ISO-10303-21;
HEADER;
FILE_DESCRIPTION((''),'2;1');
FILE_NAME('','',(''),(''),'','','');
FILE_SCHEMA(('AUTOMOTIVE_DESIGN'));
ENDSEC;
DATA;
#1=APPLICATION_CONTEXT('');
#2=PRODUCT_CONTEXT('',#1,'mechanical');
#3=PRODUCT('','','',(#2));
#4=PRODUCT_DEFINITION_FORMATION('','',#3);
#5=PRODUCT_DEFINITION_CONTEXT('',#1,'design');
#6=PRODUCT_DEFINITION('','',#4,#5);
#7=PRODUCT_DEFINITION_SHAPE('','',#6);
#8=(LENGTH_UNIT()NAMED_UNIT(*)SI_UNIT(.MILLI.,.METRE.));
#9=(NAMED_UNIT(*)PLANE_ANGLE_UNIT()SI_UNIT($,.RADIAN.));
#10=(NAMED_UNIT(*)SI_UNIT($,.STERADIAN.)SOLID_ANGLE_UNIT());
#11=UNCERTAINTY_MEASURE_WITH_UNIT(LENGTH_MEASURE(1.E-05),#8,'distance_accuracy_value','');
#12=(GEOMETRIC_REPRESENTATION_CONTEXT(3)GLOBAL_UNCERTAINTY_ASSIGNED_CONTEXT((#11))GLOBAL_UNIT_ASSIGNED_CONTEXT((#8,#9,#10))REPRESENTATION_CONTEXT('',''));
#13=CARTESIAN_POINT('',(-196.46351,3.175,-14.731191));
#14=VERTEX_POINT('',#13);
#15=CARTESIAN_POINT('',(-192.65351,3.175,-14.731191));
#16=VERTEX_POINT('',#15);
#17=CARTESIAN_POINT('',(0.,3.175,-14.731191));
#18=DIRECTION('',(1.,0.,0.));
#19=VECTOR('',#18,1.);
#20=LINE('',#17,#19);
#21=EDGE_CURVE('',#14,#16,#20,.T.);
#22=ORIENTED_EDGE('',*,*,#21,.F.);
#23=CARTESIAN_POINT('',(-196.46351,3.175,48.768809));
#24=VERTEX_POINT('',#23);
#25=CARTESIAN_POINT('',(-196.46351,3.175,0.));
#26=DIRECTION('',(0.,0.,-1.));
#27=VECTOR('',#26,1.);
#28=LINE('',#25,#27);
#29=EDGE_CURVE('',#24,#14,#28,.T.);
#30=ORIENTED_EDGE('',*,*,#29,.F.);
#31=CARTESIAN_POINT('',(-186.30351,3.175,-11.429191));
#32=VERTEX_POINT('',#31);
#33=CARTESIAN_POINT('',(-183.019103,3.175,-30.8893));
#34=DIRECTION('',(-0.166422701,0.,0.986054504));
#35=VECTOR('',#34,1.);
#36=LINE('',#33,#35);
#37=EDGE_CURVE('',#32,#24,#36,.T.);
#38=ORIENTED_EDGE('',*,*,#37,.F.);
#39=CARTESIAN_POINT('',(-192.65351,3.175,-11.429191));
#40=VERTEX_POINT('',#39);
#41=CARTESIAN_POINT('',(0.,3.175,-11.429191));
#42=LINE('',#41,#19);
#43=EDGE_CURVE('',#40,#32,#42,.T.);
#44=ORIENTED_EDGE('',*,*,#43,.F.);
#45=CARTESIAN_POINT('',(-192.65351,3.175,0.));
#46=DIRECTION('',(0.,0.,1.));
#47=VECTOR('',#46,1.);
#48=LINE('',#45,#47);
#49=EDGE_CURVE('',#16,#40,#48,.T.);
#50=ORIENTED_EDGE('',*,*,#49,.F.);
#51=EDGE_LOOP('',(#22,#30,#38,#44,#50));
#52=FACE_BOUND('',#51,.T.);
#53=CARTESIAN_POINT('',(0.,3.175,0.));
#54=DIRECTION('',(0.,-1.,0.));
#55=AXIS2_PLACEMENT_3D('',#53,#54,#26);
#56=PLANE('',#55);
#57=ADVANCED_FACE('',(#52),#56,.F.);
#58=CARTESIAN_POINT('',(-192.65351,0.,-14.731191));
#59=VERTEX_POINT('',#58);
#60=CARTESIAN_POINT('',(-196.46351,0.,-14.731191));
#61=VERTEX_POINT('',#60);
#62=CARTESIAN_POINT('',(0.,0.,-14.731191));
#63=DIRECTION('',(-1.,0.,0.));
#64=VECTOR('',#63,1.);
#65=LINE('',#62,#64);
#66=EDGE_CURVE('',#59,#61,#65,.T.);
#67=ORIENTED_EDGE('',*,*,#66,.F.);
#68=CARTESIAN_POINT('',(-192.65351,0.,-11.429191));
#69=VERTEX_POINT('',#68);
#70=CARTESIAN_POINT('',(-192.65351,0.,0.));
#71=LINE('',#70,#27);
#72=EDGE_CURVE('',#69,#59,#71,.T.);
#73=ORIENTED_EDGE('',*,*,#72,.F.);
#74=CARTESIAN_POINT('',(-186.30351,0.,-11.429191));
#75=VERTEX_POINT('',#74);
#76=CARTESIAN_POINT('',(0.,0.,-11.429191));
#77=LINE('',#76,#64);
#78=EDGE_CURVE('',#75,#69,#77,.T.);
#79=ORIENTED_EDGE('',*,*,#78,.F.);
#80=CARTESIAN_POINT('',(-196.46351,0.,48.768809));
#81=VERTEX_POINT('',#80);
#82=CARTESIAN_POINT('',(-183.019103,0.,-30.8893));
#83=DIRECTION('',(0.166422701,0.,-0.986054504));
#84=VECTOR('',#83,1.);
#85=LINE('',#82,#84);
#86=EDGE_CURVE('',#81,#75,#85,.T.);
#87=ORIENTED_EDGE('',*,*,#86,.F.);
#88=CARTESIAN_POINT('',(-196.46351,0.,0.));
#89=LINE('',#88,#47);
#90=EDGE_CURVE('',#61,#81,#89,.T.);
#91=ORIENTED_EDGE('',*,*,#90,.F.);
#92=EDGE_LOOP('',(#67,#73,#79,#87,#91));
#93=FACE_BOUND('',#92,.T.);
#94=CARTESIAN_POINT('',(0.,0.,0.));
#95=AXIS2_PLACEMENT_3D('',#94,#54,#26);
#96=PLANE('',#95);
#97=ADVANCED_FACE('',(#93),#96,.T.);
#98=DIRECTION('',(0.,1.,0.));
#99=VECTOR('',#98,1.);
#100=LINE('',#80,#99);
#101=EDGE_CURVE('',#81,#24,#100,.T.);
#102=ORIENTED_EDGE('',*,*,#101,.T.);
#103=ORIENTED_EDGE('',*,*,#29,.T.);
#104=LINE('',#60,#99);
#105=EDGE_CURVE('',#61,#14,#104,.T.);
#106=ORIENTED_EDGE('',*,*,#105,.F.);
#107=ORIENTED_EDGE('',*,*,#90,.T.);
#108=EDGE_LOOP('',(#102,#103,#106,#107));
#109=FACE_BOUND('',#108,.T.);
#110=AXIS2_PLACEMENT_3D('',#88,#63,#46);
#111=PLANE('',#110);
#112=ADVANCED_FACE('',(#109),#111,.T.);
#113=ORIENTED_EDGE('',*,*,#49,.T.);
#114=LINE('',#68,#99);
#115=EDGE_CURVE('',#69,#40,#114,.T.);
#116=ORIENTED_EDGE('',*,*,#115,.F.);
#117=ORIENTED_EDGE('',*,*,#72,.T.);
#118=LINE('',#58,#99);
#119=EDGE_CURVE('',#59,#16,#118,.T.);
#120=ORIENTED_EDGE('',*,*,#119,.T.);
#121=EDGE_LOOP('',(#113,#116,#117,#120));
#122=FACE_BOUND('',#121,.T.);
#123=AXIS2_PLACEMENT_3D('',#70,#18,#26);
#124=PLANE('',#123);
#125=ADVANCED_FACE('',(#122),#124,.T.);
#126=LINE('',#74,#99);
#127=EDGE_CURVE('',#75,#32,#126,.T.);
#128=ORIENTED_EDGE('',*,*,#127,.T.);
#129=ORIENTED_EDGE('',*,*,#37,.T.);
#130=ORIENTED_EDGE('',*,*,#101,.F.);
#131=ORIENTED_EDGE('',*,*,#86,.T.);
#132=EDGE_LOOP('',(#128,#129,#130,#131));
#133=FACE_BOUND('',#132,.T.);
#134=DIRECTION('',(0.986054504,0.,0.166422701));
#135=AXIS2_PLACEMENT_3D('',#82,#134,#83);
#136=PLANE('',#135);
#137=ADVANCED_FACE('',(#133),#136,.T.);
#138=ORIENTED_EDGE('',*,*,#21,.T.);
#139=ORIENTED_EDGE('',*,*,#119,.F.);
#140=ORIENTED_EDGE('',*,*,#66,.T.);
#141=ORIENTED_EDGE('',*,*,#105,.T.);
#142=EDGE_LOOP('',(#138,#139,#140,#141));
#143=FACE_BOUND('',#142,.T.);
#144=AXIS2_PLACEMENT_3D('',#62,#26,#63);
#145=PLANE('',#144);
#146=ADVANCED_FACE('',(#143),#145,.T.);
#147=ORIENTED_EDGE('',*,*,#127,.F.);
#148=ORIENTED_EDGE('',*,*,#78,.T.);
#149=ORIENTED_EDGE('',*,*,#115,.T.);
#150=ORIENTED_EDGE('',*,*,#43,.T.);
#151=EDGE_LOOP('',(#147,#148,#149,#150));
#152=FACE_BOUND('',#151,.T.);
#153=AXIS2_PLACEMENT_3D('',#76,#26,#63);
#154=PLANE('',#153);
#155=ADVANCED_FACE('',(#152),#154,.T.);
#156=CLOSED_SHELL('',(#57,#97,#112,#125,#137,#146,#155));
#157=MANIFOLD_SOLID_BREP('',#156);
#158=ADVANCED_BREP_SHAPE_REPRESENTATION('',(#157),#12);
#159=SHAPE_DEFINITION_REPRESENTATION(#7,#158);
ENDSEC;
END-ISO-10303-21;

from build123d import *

# Parameters (mm, degrees)
SKETCH2_W                      = 304.8
SKETCH2_H                      = 304.8
BOSS_EXTRUDE1_DEPTH            = 3.175
CUT_EXTRUDE1_DEPTH             = 348.408852067
CUT_EXTRUDE1_DEPTH_BACK        = 348.408852067
SKETCH3_W                      = 304.8
SKETCH3_H                      = 304.8
SKETCH3_R                      = 12.7
SKETCH3_R_2                    = 8.89
BODY_DELETE_KEEP_1_OUTLINE_R   = 8.89
BODY_DELETE_KEEP_1_OUTLINE_R_2 = 12.7
BODY_DELETE_KEEP_1_DEPTH       = 3.175


# Read off the part's stored shape, not the designer's step: Body-Delete/Keep 1
with BuildPart() as part:
    # Sketch2 → Boss-Extrude1 (new body)
    with BuildSketch(Plane(origin=(0, 0, 0), x_dir=(1, 0, 0), z_dir=(0, 1, 0))):
        with Locations((-56.763509666, -124.968808797)):
            Rectangle(SKETCH2_W, SKETCH2_H)
    extrude(amount=BOSS_EXTRUDE1_DEPTH)

    # Sketch3 → Cut-Extrude1 (cut, two sides: drawn at the far end of the back side and taken through both)
    # profile 1 of 3: a face of its own
    with BuildSketch(Plane(origin=(0, 3.175, 0), x_dir=(1, 0, 0), z_dir=(0, 1, 0)).offset(-CUT_EXTRUDE1_DEPTH_BACK)):
        with Locations((-56.763509666, -124.968808797)):
            Rectangle(SKETCH3_W, SKETCH3_H)
        Polygon((-188.253637726, -268.695366412), (-192.063637726, -268.695366412), (-192.063637726, -265.393366412), (-198.413637726, -265.393366412), (-188.253637726, -205.195366412), align=None, mode=Mode.SUBTRACT)
        Polygon((-185.713637726, -265.393366412), (-175.553637726, -205.195366412), (-175.553637726, -268.695366412), (-179.363637726, -268.695366412), (-179.363637726, -265.393366412), align=None, mode=Mode.SUBTRACT)
        Polygon((-162.853637726, -268.695366412), (-166.663637726, -268.695366412), (-166.663637726, -265.393366412), (-173.013637726, -265.393366412), (-162.853637726, -205.195366412), align=None, mode=Mode.SUBTRACT)
        Polygon((-150.153637726, -268.695366412), (-153.963637726, -268.695366412), (-153.963637726, -265.393366412), (-160.313637726, -265.393366412), (-150.153637726, -205.195366412), align=None, mode=Mode.SUBTRACT)
        Polygon((-147.613637726, -265.393366412), (-137.453637726, -205.195366412), (-137.453637726, -268.695366412), (-141.263637726, -268.695366412), (-141.263637726, -265.393366412), align=None, mode=Mode.SUBTRACT)
        Polygon((-128.563637726, -265.393366412), (-134.913637726, -265.393366412), (-124.753637726, -205.195366412), (-124.753637726, -268.695366412), (-128.563637726, -268.695366412), align=None, mode=Mode.SUBTRACT)
        Polygon((-122.213637726, -265.393366412), (-112.053637726, -205.195366412), (-112.053637726, -268.695366412), (-115.863637726, -268.695366412), (-115.863637726, -265.393366412), align=None, mode=Mode.SUBTRACT)
        Polygon((-99.353637726, -268.695366412), (-103.163637726, -268.695366412), (-103.163637726, -265.393366412), (-109.513637726, -265.393366412), (-99.353637726, -205.195366412), align=None, mode=Mode.SUBTRACT)
        Polygon((-90.463637726, -268.695366412), (-90.463637726, -265.393366412), (-96.813637726, -265.393366412), (-86.653637726, -205.195366412), (-86.653637726, -268.695366412), align=None, mode=Mode.SUBTRACT)
        Polygon((-84.113637726, -265.393366412), (-73.953637726, -205.195366412), (-73.953637726, -268.695366412), (-77.763637726, -268.695366412), (-77.763637726, -265.393366412), align=None, mode=Mode.SUBTRACT)
        Polygon((-71.413637726, -265.393366412), (-61.253637726, -205.195366412), (-61.253637726, -268.695366412), (-65.063637726, -268.695366412), (-65.063637726, -265.393366412), align=None, mode=Mode.SUBTRACT)
        with BuildLine():
            ThreePointArc((-132.963509666, -135.600090559), (-133.446874634, -138.030130355), (-134.823381605, -140.09021862))
            Line((-134.823381605, -140.09021862), (-188.253637726, -193.520474741))
            ThreePointArc((-188.253637726, -193.520474741), (-190.313725991, -194.896981712), (-192.743765787, -195.38034668))
            Line((-192.743765787, -195.38034668), (-196.463509666, -195.38034668))
            Line((-196.463509666, -195.38034668), (-196.463509666, -131.88034668))
            Line((-196.463509666, -131.88034668), (-132.963509666, -131.88034668))
            Line((-132.963509666, -131.88034668), (-132.963509666, -135.600090559))
        make_face(mode=Mode.SUBTRACT)
        with BuildLine():
            Line((-126.613509666, -195.38034668), (-126.613509666, -131.88034668))
            Line((-126.613509666, -131.88034668), (-63.113509666, -131.88034668))
            Line((-63.113509666, -131.88034668), (-63.113509666, -135.600090559))
            ThreePointArc((-63.113509666, -135.600090559), (-63.596874634, -138.030130355), (-64.973381605, -140.09021862))
            Line((-64.973381605, -140.09021862), (-118.403637726, -193.520474741))
            ThreePointArc((-118.403637726, -193.520474741), (-120.463725991, -194.896981712), (-122.893765787, -195.38034668))
            Line((-122.893765787, -195.38034668), (-126.613509666, -195.38034668))
        make_face(mode=Mode.SUBTRACT)
        Polygon((-52.363637726, -268.695366412), (-52.363637726, -265.393366412), (-58.713637726, -265.393366412), (-48.553637726, -205.195366412), (-48.553637726, -268.695366412), align=None, mode=Mode.SUBTRACT)
        Polygon((-35.853637726, -205.195366412), (-35.853637726, -268.695366412), (-39.663637726, -268.695366412), (-39.663637726, -265.393366412), (-46.013637726, -265.393366412), align=None, mode=Mode.SUBTRACT)
        Polygon((-23.153637726, -205.195366412), (-23.153637726, -268.695366412), (-26.963637726, -268.695366412), (-26.963637726, -265.393366412), (-33.313637726, -265.393366412), align=None, mode=Mode.SUBTRACT)
        Polygon((-20.613637726, -265.393366412), (-10.453637726, -205.195366412), (-10.453637726, -268.695366412), (-14.263637726, -268.695366412), (-14.263637726, -265.393366412), align=None, mode=Mode.SUBTRACT)
        Polygon((-1.563637726, -268.695366412), (-1.563637726, -265.393366412), (-7.913637726, -265.393366412), (2.246362274, -205.195366412), (2.246362274, -268.695366412), align=None, mode=Mode.SUBTRACT)
        with BuildLine():
            Line((-53.043765787, -195.38034668), (-56.763509666, -195.38034668))
            Line((-56.763509666, -195.38034668), (-56.763509666, -131.88034668))
            Line((-56.763509666, -131.88034668), (6.736490334, -131.88034668))
            Line((6.736490334, -131.88034668), (6.736490334, -135.600090559))
            ThreePointArc((6.736490334, -135.600090559), (6.253125366, -138.030130355), (4.876618395, -140.09021862))
            Line((4.876618395, -140.09021862), (-48.553637726, -193.520474741))
            ThreePointArc((-48.553637726, -193.520474741), (-50.613725991, -194.896981712), (-53.043765787, -195.38034668))
        make_face(mode=Mode.SUBTRACT)
        with BuildLine():
            Line((13.086490334, -131.88034668), (76.586490334, -131.88034668))
            Line((76.586490334, -131.88034668), (76.586490334, -135.600090559))
            ThreePointArc((76.586490334, -135.600090559), (76.103125366, -138.030130355), (74.726618395, -140.09021862))
            Line((74.726618395, -140.09021862), (21.296362274, -193.520474741))
            ThreePointArc((21.296362274, -193.520474741), (19.236274009, -194.896981712), (16.806234213, -195.38034668))
            Line((16.806234213, -195.38034668), (13.086490334, -195.38034668))
            Line((13.086490334, -195.38034668), (13.086490334, -131.88034668))
        make_face(mode=Mode.SUBTRACT)
        with BuildLine():
            Line((-196.463509666, -125.53034668), (-196.463509666, -62.03034668))
            Line((-196.463509666, -62.03034668), (-132.963509666, -62.03034668))
            Line((-132.963509666, -62.03034668), (-132.963509666, -65.750090559))
            ThreePointArc((-132.963509666, -65.750090559), (-133.10773728, -67.095783354), (-133.533868437, -68.38034668))
            ThreePointArc((-133.533868437, -68.38034668), (-134.095097913, -69.368194866), (-134.823381605, -70.24021862))
            Line((-134.823381605, -70.24021862), (-188.253637726, -123.670474741))
            ThreePointArc((-188.253637726, -123.670474741), (-189.12566148, -124.398758433), (-190.113509666, -124.959987909))
            ThreePointArc((-190.113509666, -124.959987909), (-191.398072992, -125.386119066), (-192.743765787, -125.53034668))
            Line((-192.743765787, -125.53034668), (-196.463509666, -125.53034668))
        make_face(mode=Mode.SUBTRACT)
        with BuildLine():
            Line((-122.893765787, -125.53034668), (-126.613509666, -125.53034668))
            Line((-126.613509666, -125.53034668), (-126.613509666, -62.03034668))
            Line((-126.613509666, -62.03034668), (-63.113509666, -62.03034668))
            Line((-63.113509666, -62.03034668), (-63.113509666, -65.750090559))
            ThreePointArc((-63.113509666, -65.750090559), (-63.596874634, -68.180130355), (-64.973381605, -70.24021862))
            Line((-64.973381605, -70.24021862), (-118.403637726, -123.670474741))
            ThreePointArc((-118.403637726, -123.670474741), (-120.463725991, -125.046981712), (-122.893765787, -125.53034668))
        make_face(mode=Mode.SUBTRACT)
        Polygon((-196.463509666, -48.768808797), (-196.463509666, 14.731191203), (-192.653509666, 14.731191203), (-192.653509666, 11.429191203), (-186.303509666, 11.429191203), align=None, mode=Mode.SUBTRACT)
        Polygon((-183.763509666, 14.731191203), (-179.953509666, 14.731191203), (-179.953509666, 11.429191203), (-173.603509666, 11.429191203), (-183.763509666, -48.768808797), align=None, mode=Mode.SUBTRACT)
        Polygon((-171.063509666, 14.731191203), (-167.253509666, 14.731191203), (-167.253509666, 11.429191203), (-160.903509666, 11.429191203), (-171.063509666, -48.768808797), align=None, mode=Mode.SUBTRACT)
        Polygon((-158.363509666, 14.731191203), (-154.553509666, 14.731191203), (-154.553509666, 11.429191203), (-148.203509666, 11.429191203), (-158.363509666, -48.768808797), align=None, mode=Mode.SUBTRACT)
        Polygon((-145.663509666, 14.731191203), (-141.853509666, 14.731191203), (-141.853509666, 11.429191203), (-135.503509666, 11.429191203), (-145.663509666, -48.768808797), align=None, mode=Mode.SUBTRACT)
        Polygon((-132.963509666, 14.731191203), (-129.153509666, 14.731191203), (-129.153509666, 11.429191203), (-122.803509666, 11.429191203), (-132.963509666, -48.768808797), align=None, mode=Mode.SUBTRACT)
        Polygon((-120.263509666, 14.731191203), (-116.453509666, 14.731191203), (-116.453509666, 11.429191203), (-110.103509666, 11.429191203), (-120.263509666, -48.768808797), align=None, mode=Mode.SUBTRACT)
        Polygon((-107.563509666, 14.731191203), (-103.753509666, 14.731191203), (-103.753509666, 11.429191203), (-97.403509666, 11.429191203), (-107.563509666, -48.768808797), align=None, mode=Mode.SUBTRACT)
        Polygon((-94.863509666, 14.731191203), (-91.053509666, 14.731191203), (-91.053509666, 11.429191203), (-84.703509666, 11.429191203), (-94.863509666, -48.768808797), align=None, mode=Mode.SUBTRACT)
        Polygon((-82.163509666, 14.731191203), (-78.353509666, 14.731191203), (-78.353509666, 11.429191203), (-72.003509666, 11.429191203), (-82.163509666, -48.768808797), align=None, mode=Mode.SUBTRACT)
        Polygon((-69.463509666, 14.731191203), (-65.653509666, 14.731191203), (-65.653509666, 11.429191203), (-59.303509666, 11.429191203), (-69.463509666, -48.768808797), align=None, mode=Mode.SUBTRACT)
        with BuildLine():
            Line((-53.043765787, -125.53034668), (-56.763509666, -125.53034668))
            Line((-56.763509666, -125.53034668), (-56.763509666, -62.03034668))
            Line((-56.763509666, -62.03034668), (6.736490334, -62.03034668))
            Line((6.736490334, -62.03034668), (6.736490334, -65.750090559))
            ThreePointArc((6.736490334, -65.750090559), (6.253125366, -68.180130355), (4.876618395, -70.24021862))
            Line((4.876618395, -70.24021862), (-48.553637726, -123.670474741))
            ThreePointArc((-48.553637726, -123.670474741), (-50.613725991, -125.046981712), (-53.043765787, -125.53034668))
        make_face(mode=Mode.SUBTRACT)
        with BuildLine():
            Line((16.806234213, -125.53034668), (13.086490334, -125.53034668))
            Line((13.086490334, -125.53034668), (13.086490334, -62.03034668))
            Line((13.086490334, -62.03034668), (76.586490334, -62.03034668))
            Line((76.586490334, -62.03034668), (76.586490334, -65.750090559))
            ThreePointArc((76.586490334, -65.750090559), (76.103125366, -68.180130355), (74.726618395, -70.24021862))
            Line((74.726618395, -70.24021862), (21.296362274, -123.670474741))
            ThreePointArc((21.296362274, -123.670474741), (19.236274009, -125.046981712), (16.806234213, -125.53034668))
        make_face(mode=Mode.SUBTRACT)
        Polygon((-56.763509666, 14.731191203), (-52.953509666, 14.731191203), (-52.953509666, 11.429191203), (-46.603509666, 11.429191203), (-56.763509666, -48.768808797), align=None, mode=Mode.SUBTRACT)
        Polygon((-44.063509666, 14.731191203), (-40.253509666, 14.731191203), (-40.253509666, 11.429191203), (-33.903509666, 11.429191203), (-44.063509666, -48.768808797), align=None, mode=Mode.SUBTRACT)
        Polygon((-31.363509666, 14.731191203), (-27.553509666, 14.731191203), (-27.553509666, 11.429191203), (-21.203509666, 11.429191203), (-31.363509666, -48.768808797), align=None, mode=Mode.SUBTRACT)
        Polygon((-18.663509666, 14.731191203), (-14.853509666, 14.731191203), (-14.853509666, 11.429191203), (-8.503509666, 11.429191203), (-18.663509666, -48.768808797), align=None, mode=Mode.SUBTRACT)
        Polygon((-5.963509666, 14.731191203), (-2.153509666, 14.731191203), (-2.153509666, 11.429191203), (4.196490334, 11.429191203), (-5.963509666, -48.768808797), align=None, mode=Mode.SUBTRACT)
        Polygon((57.536490334, -48.768808797), (57.536490334, -52.070808797), (32.136490334, -52.070808797), (32.136490334, -48.768808797), (28.834490334, -48.768808797), (28.834490334, -23.368808797), (32.136490334, -23.368808797), (32.136490334, -20.066808797), (57.536490334, -20.066808797), (57.536490334, -23.368808797), (60.838490334, -23.368808797), (60.838490334, -48.768808797), align=None, mode=Mode.SUBTRACT)
        Polygon((28.834490334, 14.731191203), (32.136490334, 14.731191203), (32.136490334, 18.033191203), (57.536490334, 18.033191203), (57.536490334, 14.731191203), (60.838490334, 14.731191203), (60.838490334, -10.668808797), (57.536490334, -10.668808797), (57.536490334, -13.970808797), (32.136490334, -13.970808797), (32.136490334, -10.668808797), (28.834490334, -10.668808797), align=None, mode=Mode.SUBTRACT)
    # profile 2 of 3: a face of its own
    with BuildSketch(Plane(origin=(0, 3.175, 0), x_dir=(1, 0, 0), z_dir=(0, 1, 0)).offset(-CUT_EXTRUDE1_DEPTH_BACK)):
        with Locations(Location((44.836490334, -36.068808797, 0), (0, 0, 270))):
            Circle(SKETCH3_R)
    # profile 3 of 3: a face of its own
    with BuildSketch(Plane(origin=(0, 3.175, 0), x_dir=(1, 0, 0), z_dir=(0, 1, 0)).offset(-CUT_EXTRUDE1_DEPTH_BACK)):
        with Locations(Location((44.836490334, 2.031191203, 0), (0, 0, 270))):
            Circle(SKETCH3_R_2)
    extrude(amount=CUT_EXTRUDE1_DEPTH + CUT_EXTRUDE1_DEPTH_BACK, mode=Mode.SUBTRACT)

    # Body-Delete/Keep 1 outline → Body-Delete/Keep 1 (cut)
    # profile 1 of 41: a face of its own
    with BuildSketch(Plane(origin=(0, 0, 0), x_dir=(1, 0, 0), z_dir=(0, 1, 0))):
        Polygon((-5.963509666, -48.768808797), (4.196490334, 11.429191203), (-2.153509666, 11.429191203), (-2.153509666, 14.731191203), (-5.963509666, 14.731191203), align=None)
    # profile 2 of 41: a face of its own
    with BuildSketch(Plane(origin=(0, 0, 0), x_dir=(1, 0, 0), z_dir=(0, 1, 0))):
        Polygon((-31.363509666, -48.768808797), (-21.203509666, 11.429191203), (-27.553509666, 11.429191203), (-27.553509666, 14.731191203), (-31.363509666, 14.731191203), align=None)
    # profile 3 of 41: a face of its own
    with BuildSketch(Plane(origin=(0, 0, 0), x_dir=(1, 0, 0), z_dir=(0, 1, 0))):
        Polygon((-18.663509666, -48.768808797), (-8.503509666, 11.429191203), (-14.853509666, 11.429191203), (-14.853509666, 14.731191203), (-18.663509666, 14.731191203), align=None)
    # profile 4 of 41: a face of its own
    with BuildSketch(Plane(origin=(0, 0, 0), x_dir=(1, 0, 0), z_dir=(0, 1, 0))):
        Polygon((-69.463509666, -48.768808797), (-59.303509666, 11.429191203), (-65.653509666, 11.429191203), (-65.653509666, 14.731191203), (-69.463509666, 14.731191203), align=None)
    # profile 5 of 41: a face of its own
    with BuildSketch(Plane(origin=(0, 0, 0), x_dir=(1, 0, 0), z_dir=(0, 1, 0))):
        Polygon((-94.863509666, -48.768808797), (-84.703509666, 11.429191203), (-91.053509666, 11.429191203), (-91.053509666, 14.731191203), (-94.863509666, 14.731191203), align=None)
    # profile 6 of 41: a face of its own
    with BuildSketch(Plane(origin=(0, 0, 0), x_dir=(1, 0, 0), z_dir=(0, 1, 0))):
        Polygon((-44.063509666, -48.768808797), (-33.903509666, 11.429191203), (-40.253509666, 11.429191203), (-40.253509666, 14.731191203), (-44.063509666, 14.731191203), align=None)
    # profile 7 of 41: a face of its own
    with BuildSketch(Plane(origin=(0, 0, 0), x_dir=(1, 0, 0), z_dir=(0, 1, 0))):
        Polygon((-56.763509666, -48.768808797), (-46.603509666, 11.429191203), (-52.953509666, 11.429191203), (-52.953509666, 14.731191203), (-56.763509666, 14.731191203), align=None)
    # profile 8 of 41: a face of its own
    with BuildSketch(Plane(origin=(0, 0, 0), x_dir=(1, 0, 0), z_dir=(0, 1, 0))):
        Polygon((-145.663509666, -48.768808797), (-135.503509666, 11.429191203), (-141.853509666, 11.429191203), (-141.853509666, 14.731191203), (-145.663509666, 14.731191203), align=None)
    # profile 9 of 41: a face of its own
    with BuildSketch(Plane(origin=(0, 0, 0), x_dir=(1, 0, 0), z_dir=(0, 1, 0))):
        Polygon((-158.363509666, -48.768808797), (-148.203509666, 11.429191203), (-154.553509666, 11.429191203), (-154.553509666, 14.731191203), (-158.363509666, 14.731191203), align=None)
    # profile 10 of 41: a face of its own
    with BuildSketch(Plane(origin=(0, 0, 0), x_dir=(1, 0, 0), z_dir=(0, 1, 0))):
        Polygon((-171.063509666, -48.768808797), (-160.903509666, 11.429191203), (-167.253509666, 11.429191203), (-167.253509666, 14.731191203), (-171.063509666, 14.731191203), align=None)
    # profile 11 of 41: a face of its own
    with BuildSketch(Plane(origin=(0, 0, 0), x_dir=(1, 0, 0), z_dir=(0, 1, 0))):
        Polygon((-82.163509666, -48.768808797), (-72.003509666, 11.429191203), (-78.353509666, 11.429191203), (-78.353509666, 14.731191203), (-82.163509666, 14.731191203), align=None)
    # profile 12 of 41: a face of its own
    with BuildSketch(Plane(origin=(0, 0, 0), x_dir=(1, 0, 0), z_dir=(0, 1, 0))):
        Polygon((-183.763509666, -48.768808797), (-173.603509666, 11.429191203), (-179.953509666, 11.429191203), (-179.953509666, 14.731191203), (-183.763509666, 14.731191203), align=None)
    # profile 13 of 41: a face of its own
    with BuildSketch(Plane(origin=(0, 0, 0), x_dir=(1, 0, 0), z_dir=(0, 1, 0))):
        Polygon((-107.563509666, -48.768808797), (-97.403509666, 11.429191203), (-103.753509666, 11.429191203), (-103.753509666, 14.731191203), (-107.563509666, 14.731191203), align=None)
    # profile 14 of 41: a face of its own
    with BuildSketch(Plane(origin=(0, 0, 0), x_dir=(1, 0, 0), z_dir=(0, 1, 0))):
        Polygon((-120.263509666, -48.768808797), (-110.103509666, 11.429191203), (-116.453509666, 11.429191203), (-116.453509666, 14.731191203), (-120.263509666, 14.731191203), align=None)
    # profile 15 of 41: a face of its own
    with BuildSketch(Plane(origin=(0, 0, 0), x_dir=(1, 0, 0), z_dir=(0, 1, 0))):
        Polygon((-132.963509666, -48.768808797), (-122.803509666, 11.429191203), (-129.153509666, 11.429191203), (-129.153509666, 14.731191203), (-132.963509666, 14.731191203), align=None)
    # profile 16 of 41: a face of its own
    with BuildSketch(Plane(origin=(0, 0, 0), x_dir=(1, 0, 0), z_dir=(0, 1, 0))):
        with BuildLine():
            Line((-132.963509666, -62.03034668), (-196.463509666, -62.03034668))
            Line((-196.463509666, -62.03034668), (-196.463509666, -125.53034668))
            Line((-196.463509666, -125.53034668), (-192.743765787, -125.53034668))
            ThreePointArc((-192.743765787, -125.53034668), (-190.313725991, -125.046981712), (-188.253637726, -123.670474741))
            Line((-188.253637726, -123.670474741), (-134.823381605, -70.24021862))
            ThreePointArc((-134.823381605, -70.24021862), (-133.446874634, -68.180130355), (-132.963509666, -65.750090559))
            Line((-132.963509666, -65.750090559), (-132.963509666, -62.03034668))
        make_face()
    # profile 17 of 41: a face of its own
    with BuildSketch(Plane(origin=(0, 0, 0), x_dir=(1, 0, 0), z_dir=(0, 1, 0))):
        with BuildLine():
            Line((-132.963509666, -131.88034668), (-196.463509666, -131.88034668))
            Line((-196.463509666, -131.88034668), (-196.463509666, -195.38034668))
            Line((-196.463509666, -195.38034668), (-192.743765787, -195.38034668))
            ThreePointArc((-192.743765787, -195.38034668), (-190.313725991, -194.896981712), (-188.253637726, -193.520474741))
            Line((-188.253637726, -193.520474741), (-134.823381605, -140.09021862))
            ThreePointArc((-134.823381605, -140.09021862), (-133.446874634, -138.030130355), (-132.963509666, -135.600090559))
            Line((-132.963509666, -135.600090559), (-132.963509666, -131.88034668))
        make_face()
    # profile 18 of 41: a face of its own
    with BuildSketch(Plane(origin=(0, 0, 0), x_dir=(1, 0, 0), z_dir=(0, 1, 0))):
        Polygon((32.136490334, 18.033191203), (32.136490334, 14.731191203), (28.834490334, 14.731191203), (28.834490334, -10.668808797), (32.136490334, -10.668808797), (32.136490334, -13.970808797), (57.536490334, -13.970808797), (57.536490334, -10.668808797), (60.838490334, -10.668808797), (60.838490334, 14.731191203), (57.536490334, 14.731191203), (57.536490334, 18.033191203), align=None)
        with Locations((44.836490334, 2.031191203)):
            Circle(BODY_DELETE_KEEP_1_OUTLINE_R, mode=Mode.SUBTRACT)
    # profile 19 of 41: a face of its own
    with BuildSketch(Plane(origin=(0, 0, 0), x_dir=(1, 0, 0), z_dir=(0, 1, 0))):
        Polygon((32.136490334, -20.066808797), (32.136490334, -23.368808797), (28.834490334, -23.368808797), (28.834490334, -48.768808797), (32.136490334, -48.768808797), (32.136490334, -52.070808797), (57.536490334, -52.070808797), (57.536490334, -48.768808797), (60.838490334, -48.768808797), (60.838490334, -23.368808797), (57.536490334, -23.368808797), (57.536490334, -20.066808797), align=None)
        with Locations((44.836490334, -36.068808797)):
            Circle(BODY_DELETE_KEEP_1_OUTLINE_R_2, mode=Mode.SUBTRACT)
    # profile 20 of 41: a face of its own
    with BuildSketch(Plane(origin=(0, 0, 0), x_dir=(1, 0, 0), z_dir=(0, 1, 0))):
        Polygon((-71.413637726, -265.393366412), (-65.063637726, -265.393366412), (-65.063637726, -268.695366412), (-61.253637726, -268.695366412), (-61.253637726, -205.195366412), align=None)
    # profile 21 of 41: a face of its own
    with BuildSketch(Plane(origin=(0, 0, 0), x_dir=(1, 0, 0), z_dir=(0, 1, 0))):
        Polygon((-124.753637726, -205.195366412), (-134.913637726, -265.393366412), (-128.563637726, -265.393366412), (-128.563637726, -268.695366412), (-124.753637726, -268.695366412), align=None)
    # profile 22 of 41: a face of its own
    with BuildSketch(Plane(origin=(0, 0, 0), x_dir=(1, 0, 0), z_dir=(0, 1, 0))):
        Polygon((-23.153637726, -205.195366412), (-33.313637726, -265.393366412), (-26.963637726, -265.393366412), (-26.963637726, -268.695366412), (-23.153637726, -268.695366412), align=None)
    # profile 23 of 41: a face of its own
    with BuildSketch(Plane(origin=(0, 0, 0), x_dir=(1, 0, 0), z_dir=(0, 1, 0))):
        Polygon((-35.853637726, -205.195366412), (-46.013637726, -265.393366412), (-39.663637726, -265.393366412), (-39.663637726, -268.695366412), (-35.853637726, -268.695366412), align=None)
    # profile 24 of 41: a face of its own
    with BuildSketch(Plane(origin=(0, 0, 0), x_dir=(1, 0, 0), z_dir=(0, 1, 0))):
        Polygon((-73.953637726, -205.195366412), (-84.113637726, -265.393366412), (-77.763637726, -265.393366412), (-77.763637726, -268.695366412), (-73.953637726, -268.695366412), align=None)
    # profile 25 of 41: a face of its own
    with BuildSketch(Plane(origin=(0, 0, 0), x_dir=(1, 0, 0), z_dir=(0, 1, 0))):
        Polygon((-162.853637726, -205.195366412), (-173.013637726, -265.393366412), (-166.663637726, -265.393366412), (-166.663637726, -268.695366412), (-162.853637726, -268.695366412), align=None)
    # profile 26 of 41: a face of its own
    with BuildSketch(Plane(origin=(0, 0, 0), x_dir=(1, 0, 0), z_dir=(0, 1, 0))):
        Polygon((-188.253637726, -205.195366412), (-198.413637726, -265.393366412), (-192.063637726, -265.393366412), (-192.063637726, -268.695366412), (-188.253637726, -268.695366412), align=None)
    # profile 27 of 41: a face of its own
    with BuildSketch(Plane(origin=(0, 0, 0), x_dir=(1, 0, 0), z_dir=(0, 1, 0))):
        Polygon((-175.553637726, -205.195366412), (-185.713637726, -265.393366412), (-179.363637726, -265.393366412), (-179.363637726, -268.695366412), (-175.553637726, -268.695366412), align=None)
    # profile 28 of 41: a face of its own
    with BuildSketch(Plane(origin=(0, 0, 0), x_dir=(1, 0, 0), z_dir=(0, 1, 0))):
        Polygon((-150.153637726, -205.195366412), (-160.313637726, -265.393366412), (-153.963637726, -265.393366412), (-153.963637726, -268.695366412), (-150.153637726, -268.695366412), align=None)
    # profile 29 of 41: a face of its own
    with BuildSketch(Plane(origin=(0, 0, 0), x_dir=(1, 0, 0), z_dir=(0, 1, 0))):
        Polygon((-86.653637726, -205.195366412), (-96.813637726, -265.393366412), (-90.463637726, -265.393366412), (-90.463637726, -268.695366412), (-86.653637726, -268.695366412), align=None)
    # profile 30 of 41: a face of its own
    with BuildSketch(Plane(origin=(0, 0, 0), x_dir=(1, 0, 0), z_dir=(0, 1, 0))):
        Polygon((2.246362274, -205.195366412), (-7.913637726, -265.393366412), (-1.563637726, -265.393366412), (-1.563637726, -268.695366412), (2.246362274, -268.695366412), align=None)
    # profile 31 of 41: a face of its own
    with BuildSketch(Plane(origin=(0, 0, 0), x_dir=(1, 0, 0), z_dir=(0, 1, 0))):
        Polygon((-137.453637726, -205.195366412), (-147.613637726, -265.393366412), (-141.263637726, -265.393366412), (-141.263637726, -268.695366412), (-137.453637726, -268.695366412), align=None)
    # profile 32 of 41: a face of its own
    with BuildSketch(Plane(origin=(0, 0, 0), x_dir=(1, 0, 0), z_dir=(0, 1, 0))):
        Polygon((-48.553637726, -205.195366412), (-58.713637726, -265.393366412), (-52.363637726, -265.393366412), (-52.363637726, -268.695366412), (-48.553637726, -268.695366412), align=None)
    # profile 33 of 41: a face of its own
    with BuildSketch(Plane(origin=(0, 0, 0), x_dir=(1, 0, 0), z_dir=(0, 1, 0))):
        Polygon((-10.453637726, -205.195366412), (-20.613637726, -265.393366412), (-14.263637726, -265.393366412), (-14.263637726, -268.695366412), (-10.453637726, -268.695366412), align=None)
    # profile 34 of 41: a face of its own
    with BuildSketch(Plane(origin=(0, 0, 0), x_dir=(1, 0, 0), z_dir=(0, 1, 0))):
        Polygon((-99.353637726, -205.195366412), (-109.513637726, -265.393366412), (-103.163637726, -265.393366412), (-103.163637726, -268.695366412), (-99.353637726, -268.695366412), align=None)
    # profile 35 of 41: a face of its own
    with BuildSketch(Plane(origin=(0, 0, 0), x_dir=(1, 0, 0), z_dir=(0, 1, 0))):
        Polygon((-112.053637726, -205.195366412), (-122.213637726, -265.393366412), (-115.863637726, -265.393366412), (-115.863637726, -268.695366412), (-112.053637726, -268.695366412), align=None)
    # profile 36 of 41: a face of its own
    with BuildSketch(Plane(origin=(0, 0, 0), x_dir=(1, 0, 0), z_dir=(0, 1, 0))):
        with BuildLine():
            Line((6.736490334, -131.88034668), (-56.763509666, -131.88034668))
            Line((-56.763509666, -131.88034668), (-56.763509666, -195.38034668))
            Line((-56.763509666, -195.38034668), (-53.043765787, -195.38034668))
            ThreePointArc((-53.043765787, -195.38034668), (-50.613725991, -194.896981712), (-48.553637726, -193.520474741))
            Line((-48.553637726, -193.520474741), (4.876618395, -140.09021862))
            ThreePointArc((4.876618395, -140.09021862), (6.253125366, -138.030130355), (6.736490334, -135.600090559))
            Line((6.736490334, -135.600090559), (6.736490334, -131.88034668))
        make_face()
    # profile 37 of 41: a face of its own
    with BuildSketch(Plane(origin=(0, 0, 0), x_dir=(1, 0, 0), z_dir=(0, 1, 0))):
        with BuildLine():
            Line((6.736490334, -62.03034668), (-56.763509666, -62.03034668))
            Line((-56.763509666, -62.03034668), (-56.763509666, -125.53034668))
            Line((-56.763509666, -125.53034668), (-53.043765787, -125.53034668))
            ThreePointArc((-53.043765787, -125.53034668), (-50.613725991, -125.046981712), (-48.553637726, -123.670474741))
            Line((-48.553637726, -123.670474741), (4.876618395, -70.24021862))
            ThreePointArc((4.876618395, -70.24021862), (6.253125366, -68.180130355), (6.736490334, -65.750090559))
            Line((6.736490334, -65.750090559), (6.736490334, -62.03034668))
        make_face()
    # profile 38 of 41: a face of its own
    with BuildSketch(Plane(origin=(0, 0, 0), x_dir=(1, 0, 0), z_dir=(0, 1, 0))):
        with BuildLine():
            Line((21.296362274, -193.520474741), (74.726618395, -140.09021862))
            ThreePointArc((74.726618395, -140.09021862), (76.103125366, -138.030130355), (76.586490334, -135.600090559))
            Line((76.586490334, -135.600090559), (76.586490334, -131.88034668))
            Line((76.586490334, -131.88034668), (13.086490334, -131.88034668))
            Line((13.086490334, -131.88034668), (13.086490334, -195.38034668))
            Line((13.086490334, -195.38034668), (16.806234213, -195.38034668))
            ThreePointArc((16.806234213, -195.38034668), (19.236274009, -194.896981712), (21.296362274, -193.520474741))
        make_face()
    # profile 39 of 41: a face of its own
    with BuildSketch(Plane(origin=(0, 0, 0), x_dir=(1, 0, 0), z_dir=(0, 1, 0))):
        with BuildLine():
            Line((-126.613509666, -131.88034668), (-126.613509666, -195.38034668))
            Line((-126.613509666, -195.38034668), (-122.893765787, -195.38034668))
            ThreePointArc((-122.893765787, -195.38034668), (-120.463725991, -194.896981712), (-118.403637726, -193.520474741))
            Line((-118.403637726, -193.520474741), (-64.973381605, -140.09021862))
            ThreePointArc((-64.973381605, -140.09021862), (-63.596874634, -138.030130355), (-63.113509666, -135.600090559))
            Line((-63.113509666, -135.600090559), (-63.113509666, -131.88034668))
            Line((-63.113509666, -131.88034668), (-126.613509666, -131.88034668))
        make_face()
    # profile 40 of 41: a face of its own
    with BuildSketch(Plane(origin=(0, 0, 0), x_dir=(1, 0, 0), z_dir=(0, 1, 0))):
        with BuildLine():
            Line((76.586490334, -62.03034668), (13.086490334, -62.03034668))
            Line((13.086490334, -62.03034668), (13.086490334, -125.53034668))
            Line((13.086490334, -125.53034668), (16.806234213, -125.53034668))
            ThreePointArc((16.806234213, -125.53034668), (19.236274009, -125.046981712), (21.296362274, -123.670474741))
            Line((21.296362274, -123.670474741), (74.726618395, -70.24021862))
            ThreePointArc((74.726618395, -70.24021862), (76.103125366, -68.180130355), (76.586490334, -65.750090559))
            Line((76.586490334, -65.750090559), (76.586490334, -62.03034668))
        make_face()
    # profile 41 of 41: a face of its own
    with BuildSketch(Plane(origin=(0, 0, 0), x_dir=(1, 0, 0), z_dir=(0, 1, 0))):
        with BuildLine():
            Line((-126.613509666, -62.03034668), (-126.613509666, -125.53034668))
            Line((-126.613509666, -125.53034668), (-122.893765787, -125.53034668))
            ThreePointArc((-122.893765787, -125.53034668), (-120.463725991, -125.046981712), (-118.403637726, -123.670474741))
            Line((-118.403637726, -123.670474741), (-64.973381605, -70.24021862))
            ThreePointArc((-64.973381605, -70.24021862), (-63.596874634, -68.180130355), (-63.113509666, -65.750090559))
            Line((-63.113509666, -65.750090559), (-63.113509666, -62.03034668))
            Line((-63.113509666, -62.03034668), (-126.613509666, -62.03034668))
        make_face()
    extrude(amount=BODY_DELETE_KEEP_1_DEPTH, mode=Mode.SUBTRACT)


solid = part.part
